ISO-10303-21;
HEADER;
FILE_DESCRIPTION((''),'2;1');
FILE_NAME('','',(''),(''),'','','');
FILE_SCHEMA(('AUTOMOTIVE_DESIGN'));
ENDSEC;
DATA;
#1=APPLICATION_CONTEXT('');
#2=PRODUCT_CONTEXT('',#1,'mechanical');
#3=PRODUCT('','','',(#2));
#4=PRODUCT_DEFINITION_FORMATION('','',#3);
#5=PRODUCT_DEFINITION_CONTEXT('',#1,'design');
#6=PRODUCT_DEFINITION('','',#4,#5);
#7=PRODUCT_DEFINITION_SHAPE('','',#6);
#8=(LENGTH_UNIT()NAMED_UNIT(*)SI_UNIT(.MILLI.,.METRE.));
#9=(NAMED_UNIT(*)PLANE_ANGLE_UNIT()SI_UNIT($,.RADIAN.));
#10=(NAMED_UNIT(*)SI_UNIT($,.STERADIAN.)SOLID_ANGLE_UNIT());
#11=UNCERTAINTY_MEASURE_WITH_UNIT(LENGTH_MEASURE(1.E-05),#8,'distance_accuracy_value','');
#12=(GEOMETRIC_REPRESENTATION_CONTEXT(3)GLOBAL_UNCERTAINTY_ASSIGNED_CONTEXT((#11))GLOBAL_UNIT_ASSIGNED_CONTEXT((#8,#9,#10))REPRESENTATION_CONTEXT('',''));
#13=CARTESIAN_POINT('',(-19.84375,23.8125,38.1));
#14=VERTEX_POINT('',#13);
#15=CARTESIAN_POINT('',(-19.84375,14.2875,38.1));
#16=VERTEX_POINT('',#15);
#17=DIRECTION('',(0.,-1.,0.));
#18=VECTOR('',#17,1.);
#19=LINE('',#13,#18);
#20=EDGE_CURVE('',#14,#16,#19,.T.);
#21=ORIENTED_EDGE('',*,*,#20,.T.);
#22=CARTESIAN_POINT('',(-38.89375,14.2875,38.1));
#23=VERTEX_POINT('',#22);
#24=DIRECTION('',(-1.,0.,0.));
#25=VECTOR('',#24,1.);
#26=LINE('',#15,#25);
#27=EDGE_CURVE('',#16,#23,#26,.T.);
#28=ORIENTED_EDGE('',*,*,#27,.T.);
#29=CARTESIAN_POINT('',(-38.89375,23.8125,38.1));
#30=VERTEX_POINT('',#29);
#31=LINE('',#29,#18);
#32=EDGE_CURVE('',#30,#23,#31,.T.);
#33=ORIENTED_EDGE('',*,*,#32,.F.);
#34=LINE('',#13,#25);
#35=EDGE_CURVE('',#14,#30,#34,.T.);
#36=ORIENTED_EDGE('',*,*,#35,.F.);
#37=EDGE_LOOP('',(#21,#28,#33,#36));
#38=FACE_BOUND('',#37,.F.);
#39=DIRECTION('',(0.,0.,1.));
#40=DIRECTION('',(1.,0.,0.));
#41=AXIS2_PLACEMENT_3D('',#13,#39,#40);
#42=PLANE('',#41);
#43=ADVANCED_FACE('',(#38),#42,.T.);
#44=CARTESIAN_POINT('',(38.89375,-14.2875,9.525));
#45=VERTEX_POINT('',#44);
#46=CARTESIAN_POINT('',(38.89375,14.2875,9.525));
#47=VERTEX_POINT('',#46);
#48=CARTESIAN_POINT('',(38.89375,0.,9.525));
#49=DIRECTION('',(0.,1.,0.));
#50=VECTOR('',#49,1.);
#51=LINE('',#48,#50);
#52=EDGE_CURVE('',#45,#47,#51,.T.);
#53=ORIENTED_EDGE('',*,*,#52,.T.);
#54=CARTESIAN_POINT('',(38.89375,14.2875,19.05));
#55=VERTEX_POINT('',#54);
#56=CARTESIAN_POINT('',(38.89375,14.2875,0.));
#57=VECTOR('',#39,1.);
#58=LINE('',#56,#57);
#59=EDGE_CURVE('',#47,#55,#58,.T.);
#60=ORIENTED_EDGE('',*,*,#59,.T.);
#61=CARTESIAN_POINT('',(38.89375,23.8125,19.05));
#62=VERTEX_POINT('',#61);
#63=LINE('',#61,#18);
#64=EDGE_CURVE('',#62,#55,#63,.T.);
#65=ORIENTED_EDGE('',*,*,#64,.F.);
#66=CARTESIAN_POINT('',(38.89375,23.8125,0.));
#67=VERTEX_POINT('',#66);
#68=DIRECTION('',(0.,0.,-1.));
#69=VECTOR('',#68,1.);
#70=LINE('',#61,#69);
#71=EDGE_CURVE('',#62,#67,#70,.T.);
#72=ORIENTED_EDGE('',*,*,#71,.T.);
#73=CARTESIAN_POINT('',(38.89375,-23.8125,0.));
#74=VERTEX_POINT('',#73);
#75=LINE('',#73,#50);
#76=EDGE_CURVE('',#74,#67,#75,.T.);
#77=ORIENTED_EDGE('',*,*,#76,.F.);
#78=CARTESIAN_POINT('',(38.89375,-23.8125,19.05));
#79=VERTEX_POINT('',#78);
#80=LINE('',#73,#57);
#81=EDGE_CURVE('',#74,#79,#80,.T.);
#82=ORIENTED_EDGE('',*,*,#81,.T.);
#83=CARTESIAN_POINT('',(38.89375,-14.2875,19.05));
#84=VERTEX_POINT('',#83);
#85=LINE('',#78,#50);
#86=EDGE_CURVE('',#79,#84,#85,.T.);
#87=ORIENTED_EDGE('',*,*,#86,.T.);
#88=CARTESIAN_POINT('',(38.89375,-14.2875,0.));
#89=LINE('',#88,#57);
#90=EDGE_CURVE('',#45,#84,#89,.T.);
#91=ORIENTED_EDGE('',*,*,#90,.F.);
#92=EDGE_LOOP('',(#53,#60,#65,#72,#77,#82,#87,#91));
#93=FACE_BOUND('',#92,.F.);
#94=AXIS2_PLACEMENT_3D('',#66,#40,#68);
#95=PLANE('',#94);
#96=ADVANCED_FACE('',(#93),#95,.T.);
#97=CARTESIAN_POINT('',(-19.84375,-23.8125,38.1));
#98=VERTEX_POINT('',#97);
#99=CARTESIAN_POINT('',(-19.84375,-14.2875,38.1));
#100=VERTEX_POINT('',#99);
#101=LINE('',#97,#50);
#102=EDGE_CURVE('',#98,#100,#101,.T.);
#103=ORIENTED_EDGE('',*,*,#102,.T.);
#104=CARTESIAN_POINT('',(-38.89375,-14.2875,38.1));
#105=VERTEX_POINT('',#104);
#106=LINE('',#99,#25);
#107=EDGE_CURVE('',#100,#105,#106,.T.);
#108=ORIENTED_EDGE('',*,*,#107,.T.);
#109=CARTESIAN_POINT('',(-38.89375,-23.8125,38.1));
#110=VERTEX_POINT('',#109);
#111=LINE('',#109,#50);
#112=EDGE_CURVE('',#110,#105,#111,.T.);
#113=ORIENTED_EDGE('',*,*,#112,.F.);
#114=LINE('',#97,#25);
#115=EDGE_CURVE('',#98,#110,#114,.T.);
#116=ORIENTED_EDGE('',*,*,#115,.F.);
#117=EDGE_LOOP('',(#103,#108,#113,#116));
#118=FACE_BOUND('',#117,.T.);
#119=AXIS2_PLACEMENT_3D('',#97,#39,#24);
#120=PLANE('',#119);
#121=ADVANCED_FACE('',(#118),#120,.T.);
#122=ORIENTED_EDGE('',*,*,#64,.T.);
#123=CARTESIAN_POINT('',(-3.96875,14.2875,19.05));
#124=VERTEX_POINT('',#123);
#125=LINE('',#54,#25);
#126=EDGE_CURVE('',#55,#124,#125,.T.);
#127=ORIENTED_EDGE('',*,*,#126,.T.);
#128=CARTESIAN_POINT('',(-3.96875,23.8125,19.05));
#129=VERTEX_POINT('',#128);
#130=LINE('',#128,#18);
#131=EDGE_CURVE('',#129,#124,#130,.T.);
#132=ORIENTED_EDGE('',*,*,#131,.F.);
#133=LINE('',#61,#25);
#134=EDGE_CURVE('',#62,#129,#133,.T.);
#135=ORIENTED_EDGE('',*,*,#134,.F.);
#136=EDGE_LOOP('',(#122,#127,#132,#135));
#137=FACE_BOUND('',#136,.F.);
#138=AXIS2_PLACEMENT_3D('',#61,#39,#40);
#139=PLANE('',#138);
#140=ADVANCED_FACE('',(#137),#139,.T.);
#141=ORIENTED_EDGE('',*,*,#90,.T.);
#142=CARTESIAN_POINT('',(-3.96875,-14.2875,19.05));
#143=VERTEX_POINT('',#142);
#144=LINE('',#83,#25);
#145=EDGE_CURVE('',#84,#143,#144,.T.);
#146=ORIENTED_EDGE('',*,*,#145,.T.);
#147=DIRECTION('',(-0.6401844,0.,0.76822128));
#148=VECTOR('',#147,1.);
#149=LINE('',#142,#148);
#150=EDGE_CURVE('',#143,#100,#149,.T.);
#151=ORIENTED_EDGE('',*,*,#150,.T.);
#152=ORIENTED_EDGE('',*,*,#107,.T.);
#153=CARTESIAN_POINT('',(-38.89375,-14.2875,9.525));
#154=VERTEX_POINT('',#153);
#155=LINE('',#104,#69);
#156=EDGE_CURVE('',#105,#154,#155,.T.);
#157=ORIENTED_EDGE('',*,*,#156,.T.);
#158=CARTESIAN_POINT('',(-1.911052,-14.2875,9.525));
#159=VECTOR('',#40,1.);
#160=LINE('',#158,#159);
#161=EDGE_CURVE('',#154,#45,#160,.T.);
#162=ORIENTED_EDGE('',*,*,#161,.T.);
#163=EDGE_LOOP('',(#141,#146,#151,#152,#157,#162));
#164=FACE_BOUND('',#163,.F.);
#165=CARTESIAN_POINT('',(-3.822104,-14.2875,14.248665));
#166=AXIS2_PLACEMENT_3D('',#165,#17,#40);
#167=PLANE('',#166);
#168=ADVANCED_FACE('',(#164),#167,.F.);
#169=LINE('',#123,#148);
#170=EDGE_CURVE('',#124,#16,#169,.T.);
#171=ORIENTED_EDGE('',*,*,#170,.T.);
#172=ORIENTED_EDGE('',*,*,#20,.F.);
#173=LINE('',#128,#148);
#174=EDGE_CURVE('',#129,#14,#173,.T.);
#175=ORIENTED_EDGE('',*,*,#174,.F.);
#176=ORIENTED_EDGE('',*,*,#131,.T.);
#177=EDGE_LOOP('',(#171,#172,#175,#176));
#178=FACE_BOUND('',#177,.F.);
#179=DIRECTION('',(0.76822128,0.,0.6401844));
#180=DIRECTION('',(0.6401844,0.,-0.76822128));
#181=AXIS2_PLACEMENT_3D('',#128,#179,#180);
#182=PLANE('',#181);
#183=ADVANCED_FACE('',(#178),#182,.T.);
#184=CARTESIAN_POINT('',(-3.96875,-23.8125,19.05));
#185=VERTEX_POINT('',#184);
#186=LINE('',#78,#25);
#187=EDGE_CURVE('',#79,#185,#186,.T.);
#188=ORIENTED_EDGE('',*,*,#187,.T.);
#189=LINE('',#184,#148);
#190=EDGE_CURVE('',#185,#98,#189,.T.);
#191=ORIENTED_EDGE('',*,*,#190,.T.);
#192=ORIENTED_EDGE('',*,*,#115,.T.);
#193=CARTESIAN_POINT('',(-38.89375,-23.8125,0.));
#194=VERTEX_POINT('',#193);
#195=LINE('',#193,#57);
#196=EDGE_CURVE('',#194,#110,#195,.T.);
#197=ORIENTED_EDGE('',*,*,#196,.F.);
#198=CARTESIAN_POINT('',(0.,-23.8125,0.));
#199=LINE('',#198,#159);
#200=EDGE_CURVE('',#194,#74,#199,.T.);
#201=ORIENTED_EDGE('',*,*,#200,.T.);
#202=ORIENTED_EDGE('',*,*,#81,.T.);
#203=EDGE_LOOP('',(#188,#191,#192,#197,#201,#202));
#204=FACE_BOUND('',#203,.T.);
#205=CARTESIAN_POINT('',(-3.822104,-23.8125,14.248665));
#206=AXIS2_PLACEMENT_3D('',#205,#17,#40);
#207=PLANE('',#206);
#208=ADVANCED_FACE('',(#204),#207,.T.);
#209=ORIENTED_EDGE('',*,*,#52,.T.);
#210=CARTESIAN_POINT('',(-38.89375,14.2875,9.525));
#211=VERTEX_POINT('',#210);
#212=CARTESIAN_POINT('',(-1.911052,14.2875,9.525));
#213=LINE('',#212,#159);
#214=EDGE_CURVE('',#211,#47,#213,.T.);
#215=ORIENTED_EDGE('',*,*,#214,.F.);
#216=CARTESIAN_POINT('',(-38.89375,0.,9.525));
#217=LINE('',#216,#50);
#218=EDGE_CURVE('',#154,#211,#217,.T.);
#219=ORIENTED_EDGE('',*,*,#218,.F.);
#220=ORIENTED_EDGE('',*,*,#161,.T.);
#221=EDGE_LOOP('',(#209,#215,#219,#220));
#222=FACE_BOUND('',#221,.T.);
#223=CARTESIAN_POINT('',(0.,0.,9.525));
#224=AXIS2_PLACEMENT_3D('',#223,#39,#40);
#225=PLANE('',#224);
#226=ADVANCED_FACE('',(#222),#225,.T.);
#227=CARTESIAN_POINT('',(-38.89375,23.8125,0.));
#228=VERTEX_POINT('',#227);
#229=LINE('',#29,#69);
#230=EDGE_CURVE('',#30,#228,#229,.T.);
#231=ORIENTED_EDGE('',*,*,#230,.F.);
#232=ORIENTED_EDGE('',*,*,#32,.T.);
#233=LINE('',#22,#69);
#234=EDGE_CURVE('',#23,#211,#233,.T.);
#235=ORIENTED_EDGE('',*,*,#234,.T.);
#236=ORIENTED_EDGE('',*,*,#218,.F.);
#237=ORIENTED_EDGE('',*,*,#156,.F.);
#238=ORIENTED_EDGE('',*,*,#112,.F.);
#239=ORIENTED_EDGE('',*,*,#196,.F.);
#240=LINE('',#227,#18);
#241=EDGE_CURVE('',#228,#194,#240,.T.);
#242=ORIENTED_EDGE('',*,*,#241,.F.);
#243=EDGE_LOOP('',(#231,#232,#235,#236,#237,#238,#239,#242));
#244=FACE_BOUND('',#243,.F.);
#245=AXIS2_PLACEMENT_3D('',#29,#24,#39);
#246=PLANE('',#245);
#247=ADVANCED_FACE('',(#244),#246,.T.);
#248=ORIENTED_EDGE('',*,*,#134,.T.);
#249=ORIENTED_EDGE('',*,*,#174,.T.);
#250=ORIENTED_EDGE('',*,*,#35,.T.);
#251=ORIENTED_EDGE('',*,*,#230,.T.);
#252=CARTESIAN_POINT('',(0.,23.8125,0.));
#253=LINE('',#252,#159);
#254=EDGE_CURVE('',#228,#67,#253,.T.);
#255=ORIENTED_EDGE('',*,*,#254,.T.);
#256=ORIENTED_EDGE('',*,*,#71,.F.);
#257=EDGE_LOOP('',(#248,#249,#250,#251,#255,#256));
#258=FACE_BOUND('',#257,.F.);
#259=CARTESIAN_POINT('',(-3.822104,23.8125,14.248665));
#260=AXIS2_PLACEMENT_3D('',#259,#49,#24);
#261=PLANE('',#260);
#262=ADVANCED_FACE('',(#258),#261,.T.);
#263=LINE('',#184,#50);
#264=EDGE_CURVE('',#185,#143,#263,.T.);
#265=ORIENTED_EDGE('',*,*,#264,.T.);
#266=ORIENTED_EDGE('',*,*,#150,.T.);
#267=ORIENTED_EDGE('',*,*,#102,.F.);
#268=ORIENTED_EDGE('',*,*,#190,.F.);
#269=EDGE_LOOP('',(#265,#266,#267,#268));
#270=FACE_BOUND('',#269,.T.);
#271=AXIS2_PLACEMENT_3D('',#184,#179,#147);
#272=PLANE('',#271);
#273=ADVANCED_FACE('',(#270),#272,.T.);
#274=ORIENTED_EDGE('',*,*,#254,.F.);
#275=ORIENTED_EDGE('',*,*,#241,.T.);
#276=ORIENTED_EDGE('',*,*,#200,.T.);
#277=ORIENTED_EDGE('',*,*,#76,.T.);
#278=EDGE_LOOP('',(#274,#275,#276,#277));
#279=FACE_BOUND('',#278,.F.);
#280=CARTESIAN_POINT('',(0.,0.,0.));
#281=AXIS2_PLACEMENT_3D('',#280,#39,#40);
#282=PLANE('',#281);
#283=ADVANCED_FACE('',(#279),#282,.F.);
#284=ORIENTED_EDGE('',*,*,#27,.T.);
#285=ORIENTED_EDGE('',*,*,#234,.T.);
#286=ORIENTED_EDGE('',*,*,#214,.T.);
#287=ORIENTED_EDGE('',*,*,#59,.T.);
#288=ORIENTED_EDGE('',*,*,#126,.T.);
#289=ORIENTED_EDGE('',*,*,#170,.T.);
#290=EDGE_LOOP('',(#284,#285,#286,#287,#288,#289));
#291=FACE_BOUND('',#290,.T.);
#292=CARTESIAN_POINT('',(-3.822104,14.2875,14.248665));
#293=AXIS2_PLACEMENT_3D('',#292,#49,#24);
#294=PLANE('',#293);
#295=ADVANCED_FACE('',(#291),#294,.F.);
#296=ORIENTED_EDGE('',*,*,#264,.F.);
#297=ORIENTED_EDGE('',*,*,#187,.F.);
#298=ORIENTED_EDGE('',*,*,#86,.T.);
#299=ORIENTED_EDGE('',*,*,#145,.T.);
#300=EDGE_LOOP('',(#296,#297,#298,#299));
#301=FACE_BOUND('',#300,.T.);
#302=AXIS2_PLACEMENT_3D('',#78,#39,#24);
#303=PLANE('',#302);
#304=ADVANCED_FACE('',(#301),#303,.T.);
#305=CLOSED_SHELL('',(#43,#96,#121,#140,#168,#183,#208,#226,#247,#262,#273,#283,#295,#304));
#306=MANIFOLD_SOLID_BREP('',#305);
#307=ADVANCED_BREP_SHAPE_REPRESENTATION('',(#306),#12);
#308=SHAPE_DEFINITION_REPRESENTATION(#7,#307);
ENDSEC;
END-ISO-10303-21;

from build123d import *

# Parameters (mm, degrees)
F0_W     = 77.7875
F0_H     = 47.625
F1_DEPTH = 9.525
F3_DEPTH = 9.525


# Not quite as in the source:
# - a pattern or mirror of a feature is missing from the dataset's text; its kind, count and spacing are read off the source's solid


with BuildPart() as f1:
    # F0 (on Top) → F1 (new body)
    with BuildSketch(Plane.XY):
        Rectangle(F0_W, F0_H)
    extrude(amount=F1_DEPTH)

    # F2 (on face) → F3 (join)
    with BuildSketch(Plane.XZ.offset(23.8125)):
        Polygon((-38.89375, 38.1), (-38.89375, 0), (38.89375, 0), (38.89375, 9.525), (38.89375, 19.05), (-3.96875, 19.05), (-19.84375, 38.1), align=None)
    f3 = extrude(amount=-F3_DEPTH)

    # F3_copies: F3 across plane
    add(f3.mirror(Plane.ZX))


solid = f1.part
